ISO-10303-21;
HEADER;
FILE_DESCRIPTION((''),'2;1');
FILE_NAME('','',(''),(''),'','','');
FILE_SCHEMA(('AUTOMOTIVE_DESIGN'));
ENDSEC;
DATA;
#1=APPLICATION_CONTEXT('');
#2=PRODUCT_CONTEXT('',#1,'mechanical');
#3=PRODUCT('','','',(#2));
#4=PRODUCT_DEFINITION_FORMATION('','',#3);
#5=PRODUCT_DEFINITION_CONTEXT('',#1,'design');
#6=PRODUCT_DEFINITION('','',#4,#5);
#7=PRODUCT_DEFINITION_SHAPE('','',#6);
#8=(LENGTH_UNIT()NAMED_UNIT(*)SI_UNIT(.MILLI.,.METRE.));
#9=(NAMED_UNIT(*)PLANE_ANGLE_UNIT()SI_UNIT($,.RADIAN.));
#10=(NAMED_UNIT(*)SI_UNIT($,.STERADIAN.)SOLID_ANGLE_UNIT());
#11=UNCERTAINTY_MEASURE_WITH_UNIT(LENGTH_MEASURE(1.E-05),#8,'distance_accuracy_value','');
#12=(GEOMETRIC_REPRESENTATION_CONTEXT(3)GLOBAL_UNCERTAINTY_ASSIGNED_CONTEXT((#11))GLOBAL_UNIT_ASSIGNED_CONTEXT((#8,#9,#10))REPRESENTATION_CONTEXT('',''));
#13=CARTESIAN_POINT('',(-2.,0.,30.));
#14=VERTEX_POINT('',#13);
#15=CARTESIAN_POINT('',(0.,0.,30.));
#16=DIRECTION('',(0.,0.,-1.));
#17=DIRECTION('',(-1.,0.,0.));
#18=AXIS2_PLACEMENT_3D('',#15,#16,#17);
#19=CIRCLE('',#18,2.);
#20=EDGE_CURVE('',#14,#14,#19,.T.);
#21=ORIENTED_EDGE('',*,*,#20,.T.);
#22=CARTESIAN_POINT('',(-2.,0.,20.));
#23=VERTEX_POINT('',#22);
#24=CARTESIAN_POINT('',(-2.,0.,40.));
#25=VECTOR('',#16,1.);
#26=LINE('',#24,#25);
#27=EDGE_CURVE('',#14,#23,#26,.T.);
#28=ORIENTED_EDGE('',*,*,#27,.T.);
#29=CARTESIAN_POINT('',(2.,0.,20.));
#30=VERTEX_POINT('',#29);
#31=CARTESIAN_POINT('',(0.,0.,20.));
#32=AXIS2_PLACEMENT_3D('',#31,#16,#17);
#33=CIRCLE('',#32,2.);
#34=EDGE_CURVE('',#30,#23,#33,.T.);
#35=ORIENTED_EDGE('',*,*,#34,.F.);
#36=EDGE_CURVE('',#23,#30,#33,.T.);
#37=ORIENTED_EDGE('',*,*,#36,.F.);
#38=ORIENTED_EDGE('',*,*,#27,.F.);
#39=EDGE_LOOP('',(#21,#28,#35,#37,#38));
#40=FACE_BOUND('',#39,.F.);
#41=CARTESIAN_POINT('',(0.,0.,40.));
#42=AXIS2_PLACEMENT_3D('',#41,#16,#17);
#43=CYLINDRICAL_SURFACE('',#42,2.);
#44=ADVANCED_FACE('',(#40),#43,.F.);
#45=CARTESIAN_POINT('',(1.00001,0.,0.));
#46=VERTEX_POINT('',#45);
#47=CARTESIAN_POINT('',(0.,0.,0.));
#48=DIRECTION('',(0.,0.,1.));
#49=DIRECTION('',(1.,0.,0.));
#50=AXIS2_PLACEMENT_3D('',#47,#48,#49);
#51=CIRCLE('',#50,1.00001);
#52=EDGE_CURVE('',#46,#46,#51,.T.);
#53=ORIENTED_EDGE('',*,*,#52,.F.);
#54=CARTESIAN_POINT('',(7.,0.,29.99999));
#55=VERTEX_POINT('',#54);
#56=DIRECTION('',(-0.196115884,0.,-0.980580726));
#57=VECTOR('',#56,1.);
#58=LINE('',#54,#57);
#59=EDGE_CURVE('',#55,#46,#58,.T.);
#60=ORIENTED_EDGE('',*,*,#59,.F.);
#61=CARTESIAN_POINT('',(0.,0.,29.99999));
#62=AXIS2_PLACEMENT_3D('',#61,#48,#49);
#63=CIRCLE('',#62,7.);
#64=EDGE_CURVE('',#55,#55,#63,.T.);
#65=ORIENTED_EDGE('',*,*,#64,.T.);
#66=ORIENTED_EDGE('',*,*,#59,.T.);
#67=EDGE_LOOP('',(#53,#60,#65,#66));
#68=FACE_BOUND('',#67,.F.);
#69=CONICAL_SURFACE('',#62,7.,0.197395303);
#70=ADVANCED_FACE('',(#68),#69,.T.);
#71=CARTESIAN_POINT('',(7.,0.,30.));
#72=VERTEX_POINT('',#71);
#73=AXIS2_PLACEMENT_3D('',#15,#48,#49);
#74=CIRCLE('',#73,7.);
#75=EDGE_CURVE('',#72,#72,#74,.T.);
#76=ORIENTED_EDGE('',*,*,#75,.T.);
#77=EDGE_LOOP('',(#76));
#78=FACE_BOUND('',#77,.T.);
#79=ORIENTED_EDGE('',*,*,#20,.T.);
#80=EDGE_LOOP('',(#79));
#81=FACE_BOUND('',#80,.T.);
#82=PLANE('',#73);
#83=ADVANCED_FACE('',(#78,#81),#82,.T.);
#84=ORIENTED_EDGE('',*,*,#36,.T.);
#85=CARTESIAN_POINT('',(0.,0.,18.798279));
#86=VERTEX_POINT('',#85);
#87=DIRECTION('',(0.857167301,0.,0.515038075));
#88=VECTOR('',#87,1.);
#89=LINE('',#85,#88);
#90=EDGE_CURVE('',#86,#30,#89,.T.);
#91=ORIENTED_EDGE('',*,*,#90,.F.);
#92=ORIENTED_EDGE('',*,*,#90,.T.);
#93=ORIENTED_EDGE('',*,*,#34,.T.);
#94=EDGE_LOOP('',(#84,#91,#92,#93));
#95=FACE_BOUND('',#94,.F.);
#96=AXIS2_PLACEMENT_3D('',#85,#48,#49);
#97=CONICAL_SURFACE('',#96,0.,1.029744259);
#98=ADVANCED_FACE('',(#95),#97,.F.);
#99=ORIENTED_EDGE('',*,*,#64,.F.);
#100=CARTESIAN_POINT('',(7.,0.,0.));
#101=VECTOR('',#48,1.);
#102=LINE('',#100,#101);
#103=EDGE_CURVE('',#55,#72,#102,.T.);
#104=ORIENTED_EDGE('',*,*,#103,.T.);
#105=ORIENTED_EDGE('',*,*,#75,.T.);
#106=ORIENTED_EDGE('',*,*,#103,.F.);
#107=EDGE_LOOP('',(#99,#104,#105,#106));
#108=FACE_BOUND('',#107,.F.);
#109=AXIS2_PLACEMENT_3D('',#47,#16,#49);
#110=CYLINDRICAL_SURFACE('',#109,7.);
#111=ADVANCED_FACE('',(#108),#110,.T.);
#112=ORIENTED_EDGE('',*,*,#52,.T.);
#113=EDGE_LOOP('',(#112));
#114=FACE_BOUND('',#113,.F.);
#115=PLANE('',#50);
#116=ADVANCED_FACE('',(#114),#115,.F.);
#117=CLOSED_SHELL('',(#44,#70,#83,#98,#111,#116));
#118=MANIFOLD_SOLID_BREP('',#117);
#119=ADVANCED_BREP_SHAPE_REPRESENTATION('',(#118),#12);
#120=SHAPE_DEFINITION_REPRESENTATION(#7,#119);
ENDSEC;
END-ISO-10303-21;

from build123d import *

# Parameters (mm, degrees)
F0_R     = 7
F1_DEPTH = 30
F3_D     = 4
F3_DEPTH = 10
F3_TIP   = 1.2017212381
F4_SIZE2 = 5.99999
F4_SIZE  = 29.99999


# Not quite as in the source:
# - a fillet or chamfer is up to 0.001 mm smaller than in the source, because OpenCascade refuses the exact size


with BuildPart() as f1:
    # F0 (on Top) → F1 (new body)
    with BuildSketch(Plane.XY):
        Circle(F0_R)
    extrude(amount=F1_DEPTH)

    # F3
    with Locations(Plane.XY.offset(30)):
        with Locations((0, 0)):
            Hole(F3_D / 2, depth=F3_DEPTH)
            with Locations((0, 0, -(F3_DEPTH + F3_TIP / 2))):  # 118° drill point
                Cone(0, F3_D / 2, F3_TIP, mode=Mode.SUBTRACT)

    # F4 (size 30 and 6 in the source; OpenCascade refuses exactly that, so slightly less here)
    f4_edges = [f1.edges().sort_by_distance(p)[0] for p in [
        (-7, 0, 0),
    ]]
    f4_side = f1.faces().sort_by_distance((-7, 0, 15))[0]
    chamfer(f4_edges, length=F4_SIZE, length2=F4_SIZE2, reference=f4_side)


solid = f1.part
